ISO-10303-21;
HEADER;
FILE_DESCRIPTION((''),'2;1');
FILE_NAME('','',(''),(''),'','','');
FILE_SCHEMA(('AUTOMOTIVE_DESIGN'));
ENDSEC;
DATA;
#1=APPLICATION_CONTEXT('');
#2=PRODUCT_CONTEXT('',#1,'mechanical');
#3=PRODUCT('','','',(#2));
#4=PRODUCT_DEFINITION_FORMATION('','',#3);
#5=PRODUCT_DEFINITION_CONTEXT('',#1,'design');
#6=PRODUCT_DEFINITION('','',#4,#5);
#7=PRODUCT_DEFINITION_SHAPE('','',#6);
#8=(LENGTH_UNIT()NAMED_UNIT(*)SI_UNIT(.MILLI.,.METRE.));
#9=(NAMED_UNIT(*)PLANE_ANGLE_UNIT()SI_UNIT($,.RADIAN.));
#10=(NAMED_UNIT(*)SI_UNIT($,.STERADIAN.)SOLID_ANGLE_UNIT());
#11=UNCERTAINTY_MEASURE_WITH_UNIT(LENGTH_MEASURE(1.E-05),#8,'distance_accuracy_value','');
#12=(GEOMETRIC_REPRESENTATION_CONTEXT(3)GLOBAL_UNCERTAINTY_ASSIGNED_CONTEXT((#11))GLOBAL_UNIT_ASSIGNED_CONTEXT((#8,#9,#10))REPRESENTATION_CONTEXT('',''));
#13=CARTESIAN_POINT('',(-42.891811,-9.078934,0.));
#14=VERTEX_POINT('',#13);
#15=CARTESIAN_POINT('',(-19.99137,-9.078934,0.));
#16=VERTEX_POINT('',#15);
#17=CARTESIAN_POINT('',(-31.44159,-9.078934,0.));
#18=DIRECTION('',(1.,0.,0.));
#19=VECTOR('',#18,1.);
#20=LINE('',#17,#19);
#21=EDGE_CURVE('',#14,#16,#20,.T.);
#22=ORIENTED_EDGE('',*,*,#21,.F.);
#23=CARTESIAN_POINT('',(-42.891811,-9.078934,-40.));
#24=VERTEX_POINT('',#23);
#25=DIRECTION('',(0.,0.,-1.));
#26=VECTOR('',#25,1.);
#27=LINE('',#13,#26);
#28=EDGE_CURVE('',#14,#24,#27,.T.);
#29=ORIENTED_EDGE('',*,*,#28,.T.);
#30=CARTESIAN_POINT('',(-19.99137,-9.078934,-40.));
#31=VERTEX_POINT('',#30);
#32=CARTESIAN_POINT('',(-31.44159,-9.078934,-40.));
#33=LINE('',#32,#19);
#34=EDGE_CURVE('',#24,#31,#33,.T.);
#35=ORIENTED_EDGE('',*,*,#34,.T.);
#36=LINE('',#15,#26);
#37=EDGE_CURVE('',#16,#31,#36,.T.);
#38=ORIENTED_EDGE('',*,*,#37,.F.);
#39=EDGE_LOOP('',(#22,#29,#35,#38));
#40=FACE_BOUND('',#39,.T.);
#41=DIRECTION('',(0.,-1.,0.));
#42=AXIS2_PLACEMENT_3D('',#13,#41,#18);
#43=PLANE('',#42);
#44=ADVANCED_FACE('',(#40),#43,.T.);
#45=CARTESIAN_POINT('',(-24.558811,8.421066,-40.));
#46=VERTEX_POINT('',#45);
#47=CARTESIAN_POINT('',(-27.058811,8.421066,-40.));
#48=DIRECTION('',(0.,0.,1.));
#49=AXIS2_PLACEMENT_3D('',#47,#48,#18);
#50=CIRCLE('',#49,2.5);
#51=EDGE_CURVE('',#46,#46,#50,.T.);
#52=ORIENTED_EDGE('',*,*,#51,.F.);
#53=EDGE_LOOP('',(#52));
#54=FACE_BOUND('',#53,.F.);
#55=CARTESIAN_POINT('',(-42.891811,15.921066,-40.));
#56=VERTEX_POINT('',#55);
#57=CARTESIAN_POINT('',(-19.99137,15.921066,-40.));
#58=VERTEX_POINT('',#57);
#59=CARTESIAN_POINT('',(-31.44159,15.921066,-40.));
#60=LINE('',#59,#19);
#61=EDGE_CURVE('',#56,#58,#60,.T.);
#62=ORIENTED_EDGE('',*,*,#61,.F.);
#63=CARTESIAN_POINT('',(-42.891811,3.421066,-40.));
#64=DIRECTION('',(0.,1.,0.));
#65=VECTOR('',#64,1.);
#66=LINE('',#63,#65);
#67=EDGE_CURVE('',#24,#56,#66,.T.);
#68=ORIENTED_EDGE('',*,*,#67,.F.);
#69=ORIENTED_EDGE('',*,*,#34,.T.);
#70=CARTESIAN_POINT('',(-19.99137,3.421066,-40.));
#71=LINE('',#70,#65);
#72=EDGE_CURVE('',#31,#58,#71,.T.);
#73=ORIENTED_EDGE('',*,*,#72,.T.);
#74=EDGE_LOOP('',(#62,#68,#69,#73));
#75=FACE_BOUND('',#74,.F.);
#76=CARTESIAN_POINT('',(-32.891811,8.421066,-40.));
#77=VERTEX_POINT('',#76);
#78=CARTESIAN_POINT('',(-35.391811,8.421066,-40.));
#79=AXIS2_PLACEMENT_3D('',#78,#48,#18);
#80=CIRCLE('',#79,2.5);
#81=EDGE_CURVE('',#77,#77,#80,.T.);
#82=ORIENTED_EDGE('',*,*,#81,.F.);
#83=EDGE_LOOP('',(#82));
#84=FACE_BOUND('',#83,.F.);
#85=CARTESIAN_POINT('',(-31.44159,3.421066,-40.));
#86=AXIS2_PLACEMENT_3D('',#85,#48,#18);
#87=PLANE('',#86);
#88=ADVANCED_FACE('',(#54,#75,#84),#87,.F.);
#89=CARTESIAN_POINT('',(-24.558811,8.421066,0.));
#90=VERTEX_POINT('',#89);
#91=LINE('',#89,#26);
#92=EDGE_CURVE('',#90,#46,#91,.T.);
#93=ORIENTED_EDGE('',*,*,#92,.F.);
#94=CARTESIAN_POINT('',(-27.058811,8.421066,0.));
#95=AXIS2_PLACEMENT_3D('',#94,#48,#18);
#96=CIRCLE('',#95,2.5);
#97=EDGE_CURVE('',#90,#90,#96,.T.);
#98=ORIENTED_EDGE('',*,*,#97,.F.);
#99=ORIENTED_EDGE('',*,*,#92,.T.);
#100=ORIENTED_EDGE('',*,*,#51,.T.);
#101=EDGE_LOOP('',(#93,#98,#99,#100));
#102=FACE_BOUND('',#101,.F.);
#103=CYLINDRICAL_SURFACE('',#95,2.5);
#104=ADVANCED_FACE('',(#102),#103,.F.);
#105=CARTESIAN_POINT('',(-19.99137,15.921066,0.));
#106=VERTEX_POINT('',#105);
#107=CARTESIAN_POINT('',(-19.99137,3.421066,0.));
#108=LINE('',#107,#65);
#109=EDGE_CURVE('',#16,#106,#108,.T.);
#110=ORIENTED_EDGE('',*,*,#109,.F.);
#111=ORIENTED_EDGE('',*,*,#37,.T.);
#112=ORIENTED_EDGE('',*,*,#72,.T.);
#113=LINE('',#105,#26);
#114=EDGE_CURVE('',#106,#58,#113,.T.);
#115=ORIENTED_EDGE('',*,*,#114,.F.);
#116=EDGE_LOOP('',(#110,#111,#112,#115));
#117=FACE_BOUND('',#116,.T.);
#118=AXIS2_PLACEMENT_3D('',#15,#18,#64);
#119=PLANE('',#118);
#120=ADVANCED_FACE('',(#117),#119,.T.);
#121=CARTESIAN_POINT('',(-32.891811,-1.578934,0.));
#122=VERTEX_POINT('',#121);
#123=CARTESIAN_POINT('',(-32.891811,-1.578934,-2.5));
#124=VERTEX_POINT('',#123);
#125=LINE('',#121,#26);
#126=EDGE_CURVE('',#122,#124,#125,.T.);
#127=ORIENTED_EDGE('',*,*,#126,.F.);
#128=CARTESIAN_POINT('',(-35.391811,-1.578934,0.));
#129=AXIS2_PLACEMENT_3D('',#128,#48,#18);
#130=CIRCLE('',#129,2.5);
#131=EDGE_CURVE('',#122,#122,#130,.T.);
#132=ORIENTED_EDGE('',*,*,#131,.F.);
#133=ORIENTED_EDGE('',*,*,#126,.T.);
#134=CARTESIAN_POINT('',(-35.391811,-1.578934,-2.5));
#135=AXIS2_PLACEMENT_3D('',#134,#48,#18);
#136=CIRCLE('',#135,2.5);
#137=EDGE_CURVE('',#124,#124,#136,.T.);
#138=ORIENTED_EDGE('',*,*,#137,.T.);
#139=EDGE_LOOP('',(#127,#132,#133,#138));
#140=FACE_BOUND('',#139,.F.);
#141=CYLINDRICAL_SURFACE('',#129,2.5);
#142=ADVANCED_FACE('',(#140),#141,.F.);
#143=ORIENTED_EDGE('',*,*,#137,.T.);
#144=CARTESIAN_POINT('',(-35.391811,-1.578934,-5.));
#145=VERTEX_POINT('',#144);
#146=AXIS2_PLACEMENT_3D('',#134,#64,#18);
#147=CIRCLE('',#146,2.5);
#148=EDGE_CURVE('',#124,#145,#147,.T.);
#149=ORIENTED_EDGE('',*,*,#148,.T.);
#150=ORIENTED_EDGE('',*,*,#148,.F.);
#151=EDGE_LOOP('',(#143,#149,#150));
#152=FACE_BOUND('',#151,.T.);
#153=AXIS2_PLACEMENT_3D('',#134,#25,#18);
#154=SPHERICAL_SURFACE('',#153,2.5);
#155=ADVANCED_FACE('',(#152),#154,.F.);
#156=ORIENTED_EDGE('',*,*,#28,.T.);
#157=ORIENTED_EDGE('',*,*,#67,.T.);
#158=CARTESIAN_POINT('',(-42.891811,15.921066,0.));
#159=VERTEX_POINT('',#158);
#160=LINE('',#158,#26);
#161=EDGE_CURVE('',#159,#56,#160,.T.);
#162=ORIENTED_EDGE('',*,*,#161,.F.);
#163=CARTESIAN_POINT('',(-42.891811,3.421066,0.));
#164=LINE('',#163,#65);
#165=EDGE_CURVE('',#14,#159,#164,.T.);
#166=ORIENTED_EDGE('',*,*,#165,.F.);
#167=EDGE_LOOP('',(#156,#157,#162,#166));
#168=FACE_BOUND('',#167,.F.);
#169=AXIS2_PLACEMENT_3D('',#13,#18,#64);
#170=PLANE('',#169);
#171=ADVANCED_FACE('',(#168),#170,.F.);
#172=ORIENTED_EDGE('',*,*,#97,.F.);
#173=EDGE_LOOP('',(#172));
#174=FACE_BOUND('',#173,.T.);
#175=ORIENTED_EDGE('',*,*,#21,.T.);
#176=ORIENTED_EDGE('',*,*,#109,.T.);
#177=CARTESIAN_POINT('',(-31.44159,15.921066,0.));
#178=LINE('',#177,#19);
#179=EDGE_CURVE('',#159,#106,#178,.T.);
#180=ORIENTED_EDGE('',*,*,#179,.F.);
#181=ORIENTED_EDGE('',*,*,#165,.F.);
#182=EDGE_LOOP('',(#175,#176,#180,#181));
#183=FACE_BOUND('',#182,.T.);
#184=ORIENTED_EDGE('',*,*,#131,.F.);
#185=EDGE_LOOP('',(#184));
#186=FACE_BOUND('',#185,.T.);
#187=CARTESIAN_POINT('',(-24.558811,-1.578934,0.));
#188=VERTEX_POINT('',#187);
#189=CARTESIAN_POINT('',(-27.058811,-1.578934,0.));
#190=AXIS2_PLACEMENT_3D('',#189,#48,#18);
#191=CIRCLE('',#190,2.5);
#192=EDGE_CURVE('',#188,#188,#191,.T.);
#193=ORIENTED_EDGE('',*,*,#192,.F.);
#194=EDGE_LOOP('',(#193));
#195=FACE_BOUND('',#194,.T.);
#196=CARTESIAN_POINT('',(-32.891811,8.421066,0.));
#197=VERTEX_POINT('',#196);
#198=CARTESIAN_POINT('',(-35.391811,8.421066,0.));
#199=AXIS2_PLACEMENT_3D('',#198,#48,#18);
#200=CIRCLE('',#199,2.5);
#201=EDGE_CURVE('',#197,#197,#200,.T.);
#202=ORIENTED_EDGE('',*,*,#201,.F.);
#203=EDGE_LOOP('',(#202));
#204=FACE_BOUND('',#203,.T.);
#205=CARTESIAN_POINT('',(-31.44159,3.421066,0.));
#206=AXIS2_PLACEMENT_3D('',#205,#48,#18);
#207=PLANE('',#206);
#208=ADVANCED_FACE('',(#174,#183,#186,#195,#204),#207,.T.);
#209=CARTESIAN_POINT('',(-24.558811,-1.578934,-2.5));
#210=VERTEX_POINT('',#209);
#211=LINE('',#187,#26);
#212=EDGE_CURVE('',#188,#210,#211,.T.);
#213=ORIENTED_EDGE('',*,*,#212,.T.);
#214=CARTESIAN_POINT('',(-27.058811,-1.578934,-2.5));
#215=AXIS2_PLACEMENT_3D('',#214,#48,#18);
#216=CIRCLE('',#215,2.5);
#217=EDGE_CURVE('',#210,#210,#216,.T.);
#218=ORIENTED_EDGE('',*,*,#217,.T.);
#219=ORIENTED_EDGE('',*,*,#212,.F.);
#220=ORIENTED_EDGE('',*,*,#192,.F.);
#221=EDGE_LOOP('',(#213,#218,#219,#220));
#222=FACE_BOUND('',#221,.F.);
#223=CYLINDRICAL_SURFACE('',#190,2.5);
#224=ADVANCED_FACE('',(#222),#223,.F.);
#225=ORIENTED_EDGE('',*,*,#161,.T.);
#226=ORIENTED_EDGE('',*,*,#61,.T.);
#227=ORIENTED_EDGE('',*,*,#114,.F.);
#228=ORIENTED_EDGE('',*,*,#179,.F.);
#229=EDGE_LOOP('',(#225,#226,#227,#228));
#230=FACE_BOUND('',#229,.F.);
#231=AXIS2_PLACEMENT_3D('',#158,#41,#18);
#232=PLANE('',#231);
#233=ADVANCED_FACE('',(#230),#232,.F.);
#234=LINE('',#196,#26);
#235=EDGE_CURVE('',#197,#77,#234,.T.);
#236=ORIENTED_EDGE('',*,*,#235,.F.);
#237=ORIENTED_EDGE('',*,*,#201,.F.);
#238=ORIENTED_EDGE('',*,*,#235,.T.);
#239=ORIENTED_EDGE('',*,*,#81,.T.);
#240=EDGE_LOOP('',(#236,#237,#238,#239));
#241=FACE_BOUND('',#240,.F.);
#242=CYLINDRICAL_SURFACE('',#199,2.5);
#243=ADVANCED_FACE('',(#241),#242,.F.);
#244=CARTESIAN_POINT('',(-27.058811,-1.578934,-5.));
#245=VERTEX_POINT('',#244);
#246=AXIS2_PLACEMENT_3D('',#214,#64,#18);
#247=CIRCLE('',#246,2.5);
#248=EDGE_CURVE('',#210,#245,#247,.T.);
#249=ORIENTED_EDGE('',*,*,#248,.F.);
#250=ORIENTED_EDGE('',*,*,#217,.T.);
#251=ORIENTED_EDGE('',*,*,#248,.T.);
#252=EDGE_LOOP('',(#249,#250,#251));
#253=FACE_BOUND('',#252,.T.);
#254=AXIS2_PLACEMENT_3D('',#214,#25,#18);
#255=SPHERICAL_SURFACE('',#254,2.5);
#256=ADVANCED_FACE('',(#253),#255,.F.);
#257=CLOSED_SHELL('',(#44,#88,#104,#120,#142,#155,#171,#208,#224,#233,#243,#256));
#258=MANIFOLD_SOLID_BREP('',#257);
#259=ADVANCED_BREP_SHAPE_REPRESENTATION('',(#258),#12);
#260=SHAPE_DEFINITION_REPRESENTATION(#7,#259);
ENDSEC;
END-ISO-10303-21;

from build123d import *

# Parameters (mm, degrees)
F0_W     = 22.9004416908
F0_H     = 25
F0_R     = 2.5
F1_DEPTH = 40
F2_DEPTH = 40
F3_DEPTH = 5
F4_R     = 2.5


# Not quite as in the source:
# - a feature names something its author has since deleted; it is built from what else it names


with BuildPart() as f1:
    # F0 (on Top) → F1 (new body)
    with BuildSketch(Plane.XY):
        with Locations((-31.441590436, 3.4210662183)):
            Rectangle(F0_W, F0_H)
        with Locations((-35.3918112814, -1.5789337817)):
            Circle(F0_R, mode=Mode.SUBTRACT)
        with Locations((-27.0588112814, -1.5789337817)):
            Circle(F0_R, mode=Mode.SUBTRACT)
        with Locations((-35.3918112814, 8.4210662183)):
            Circle(F0_R, mode=Mode.SUBTRACT)
        with Locations((-27.0588112814, 8.4210662183)):
            Circle(F0_R, mode=Mode.SUBTRACT)
        with Locations((-35.3918112814, 8.4210662183)):
            Circle(F0_R)
        with Locations((-27.0588112814, 8.4210662183)):
            Circle(F0_R)
        with Locations((-27.0588112814, -1.5789337817)):
            Circle(F0_R)
        with Locations((-35.3918112814, -1.5789337817)):
            Circle(F0_R)
    extrude(amount=-F1_DEPTH)

    # F0 (on Top) → F2 (cut)
    with BuildSketch(Plane.XY):
        with Locations((-35.3918112814, 8.4210662183)):
            Circle(F0_R)
        with Locations((-27.0588112814, 8.4210662183)):
            Circle(F0_R)
    extrude(amount=-F2_DEPTH, mode=Mode.SUBTRACT)

    # F0 (on Top) → F3 (cut)
    with BuildSketch(Plane.XY):
        with Locations((-35.3918112814, -1.5789337817)):
            Circle(F0_R)
        with Locations((-27.0588112814, -1.5789337817)):
            Circle(F0_R)
    extrude(amount=-F3_DEPTH, mode=Mode.SUBTRACT)

    # F4
    f4_edges = [f1.edges().sort_by_distance(p)[0] for p in [
        (-37.891811, -1.578934, -5),
        (-29.558811, -1.578934, -5),
    ]]
    fillet(f4_edges, radius=F4_R)


solid = f1.part
